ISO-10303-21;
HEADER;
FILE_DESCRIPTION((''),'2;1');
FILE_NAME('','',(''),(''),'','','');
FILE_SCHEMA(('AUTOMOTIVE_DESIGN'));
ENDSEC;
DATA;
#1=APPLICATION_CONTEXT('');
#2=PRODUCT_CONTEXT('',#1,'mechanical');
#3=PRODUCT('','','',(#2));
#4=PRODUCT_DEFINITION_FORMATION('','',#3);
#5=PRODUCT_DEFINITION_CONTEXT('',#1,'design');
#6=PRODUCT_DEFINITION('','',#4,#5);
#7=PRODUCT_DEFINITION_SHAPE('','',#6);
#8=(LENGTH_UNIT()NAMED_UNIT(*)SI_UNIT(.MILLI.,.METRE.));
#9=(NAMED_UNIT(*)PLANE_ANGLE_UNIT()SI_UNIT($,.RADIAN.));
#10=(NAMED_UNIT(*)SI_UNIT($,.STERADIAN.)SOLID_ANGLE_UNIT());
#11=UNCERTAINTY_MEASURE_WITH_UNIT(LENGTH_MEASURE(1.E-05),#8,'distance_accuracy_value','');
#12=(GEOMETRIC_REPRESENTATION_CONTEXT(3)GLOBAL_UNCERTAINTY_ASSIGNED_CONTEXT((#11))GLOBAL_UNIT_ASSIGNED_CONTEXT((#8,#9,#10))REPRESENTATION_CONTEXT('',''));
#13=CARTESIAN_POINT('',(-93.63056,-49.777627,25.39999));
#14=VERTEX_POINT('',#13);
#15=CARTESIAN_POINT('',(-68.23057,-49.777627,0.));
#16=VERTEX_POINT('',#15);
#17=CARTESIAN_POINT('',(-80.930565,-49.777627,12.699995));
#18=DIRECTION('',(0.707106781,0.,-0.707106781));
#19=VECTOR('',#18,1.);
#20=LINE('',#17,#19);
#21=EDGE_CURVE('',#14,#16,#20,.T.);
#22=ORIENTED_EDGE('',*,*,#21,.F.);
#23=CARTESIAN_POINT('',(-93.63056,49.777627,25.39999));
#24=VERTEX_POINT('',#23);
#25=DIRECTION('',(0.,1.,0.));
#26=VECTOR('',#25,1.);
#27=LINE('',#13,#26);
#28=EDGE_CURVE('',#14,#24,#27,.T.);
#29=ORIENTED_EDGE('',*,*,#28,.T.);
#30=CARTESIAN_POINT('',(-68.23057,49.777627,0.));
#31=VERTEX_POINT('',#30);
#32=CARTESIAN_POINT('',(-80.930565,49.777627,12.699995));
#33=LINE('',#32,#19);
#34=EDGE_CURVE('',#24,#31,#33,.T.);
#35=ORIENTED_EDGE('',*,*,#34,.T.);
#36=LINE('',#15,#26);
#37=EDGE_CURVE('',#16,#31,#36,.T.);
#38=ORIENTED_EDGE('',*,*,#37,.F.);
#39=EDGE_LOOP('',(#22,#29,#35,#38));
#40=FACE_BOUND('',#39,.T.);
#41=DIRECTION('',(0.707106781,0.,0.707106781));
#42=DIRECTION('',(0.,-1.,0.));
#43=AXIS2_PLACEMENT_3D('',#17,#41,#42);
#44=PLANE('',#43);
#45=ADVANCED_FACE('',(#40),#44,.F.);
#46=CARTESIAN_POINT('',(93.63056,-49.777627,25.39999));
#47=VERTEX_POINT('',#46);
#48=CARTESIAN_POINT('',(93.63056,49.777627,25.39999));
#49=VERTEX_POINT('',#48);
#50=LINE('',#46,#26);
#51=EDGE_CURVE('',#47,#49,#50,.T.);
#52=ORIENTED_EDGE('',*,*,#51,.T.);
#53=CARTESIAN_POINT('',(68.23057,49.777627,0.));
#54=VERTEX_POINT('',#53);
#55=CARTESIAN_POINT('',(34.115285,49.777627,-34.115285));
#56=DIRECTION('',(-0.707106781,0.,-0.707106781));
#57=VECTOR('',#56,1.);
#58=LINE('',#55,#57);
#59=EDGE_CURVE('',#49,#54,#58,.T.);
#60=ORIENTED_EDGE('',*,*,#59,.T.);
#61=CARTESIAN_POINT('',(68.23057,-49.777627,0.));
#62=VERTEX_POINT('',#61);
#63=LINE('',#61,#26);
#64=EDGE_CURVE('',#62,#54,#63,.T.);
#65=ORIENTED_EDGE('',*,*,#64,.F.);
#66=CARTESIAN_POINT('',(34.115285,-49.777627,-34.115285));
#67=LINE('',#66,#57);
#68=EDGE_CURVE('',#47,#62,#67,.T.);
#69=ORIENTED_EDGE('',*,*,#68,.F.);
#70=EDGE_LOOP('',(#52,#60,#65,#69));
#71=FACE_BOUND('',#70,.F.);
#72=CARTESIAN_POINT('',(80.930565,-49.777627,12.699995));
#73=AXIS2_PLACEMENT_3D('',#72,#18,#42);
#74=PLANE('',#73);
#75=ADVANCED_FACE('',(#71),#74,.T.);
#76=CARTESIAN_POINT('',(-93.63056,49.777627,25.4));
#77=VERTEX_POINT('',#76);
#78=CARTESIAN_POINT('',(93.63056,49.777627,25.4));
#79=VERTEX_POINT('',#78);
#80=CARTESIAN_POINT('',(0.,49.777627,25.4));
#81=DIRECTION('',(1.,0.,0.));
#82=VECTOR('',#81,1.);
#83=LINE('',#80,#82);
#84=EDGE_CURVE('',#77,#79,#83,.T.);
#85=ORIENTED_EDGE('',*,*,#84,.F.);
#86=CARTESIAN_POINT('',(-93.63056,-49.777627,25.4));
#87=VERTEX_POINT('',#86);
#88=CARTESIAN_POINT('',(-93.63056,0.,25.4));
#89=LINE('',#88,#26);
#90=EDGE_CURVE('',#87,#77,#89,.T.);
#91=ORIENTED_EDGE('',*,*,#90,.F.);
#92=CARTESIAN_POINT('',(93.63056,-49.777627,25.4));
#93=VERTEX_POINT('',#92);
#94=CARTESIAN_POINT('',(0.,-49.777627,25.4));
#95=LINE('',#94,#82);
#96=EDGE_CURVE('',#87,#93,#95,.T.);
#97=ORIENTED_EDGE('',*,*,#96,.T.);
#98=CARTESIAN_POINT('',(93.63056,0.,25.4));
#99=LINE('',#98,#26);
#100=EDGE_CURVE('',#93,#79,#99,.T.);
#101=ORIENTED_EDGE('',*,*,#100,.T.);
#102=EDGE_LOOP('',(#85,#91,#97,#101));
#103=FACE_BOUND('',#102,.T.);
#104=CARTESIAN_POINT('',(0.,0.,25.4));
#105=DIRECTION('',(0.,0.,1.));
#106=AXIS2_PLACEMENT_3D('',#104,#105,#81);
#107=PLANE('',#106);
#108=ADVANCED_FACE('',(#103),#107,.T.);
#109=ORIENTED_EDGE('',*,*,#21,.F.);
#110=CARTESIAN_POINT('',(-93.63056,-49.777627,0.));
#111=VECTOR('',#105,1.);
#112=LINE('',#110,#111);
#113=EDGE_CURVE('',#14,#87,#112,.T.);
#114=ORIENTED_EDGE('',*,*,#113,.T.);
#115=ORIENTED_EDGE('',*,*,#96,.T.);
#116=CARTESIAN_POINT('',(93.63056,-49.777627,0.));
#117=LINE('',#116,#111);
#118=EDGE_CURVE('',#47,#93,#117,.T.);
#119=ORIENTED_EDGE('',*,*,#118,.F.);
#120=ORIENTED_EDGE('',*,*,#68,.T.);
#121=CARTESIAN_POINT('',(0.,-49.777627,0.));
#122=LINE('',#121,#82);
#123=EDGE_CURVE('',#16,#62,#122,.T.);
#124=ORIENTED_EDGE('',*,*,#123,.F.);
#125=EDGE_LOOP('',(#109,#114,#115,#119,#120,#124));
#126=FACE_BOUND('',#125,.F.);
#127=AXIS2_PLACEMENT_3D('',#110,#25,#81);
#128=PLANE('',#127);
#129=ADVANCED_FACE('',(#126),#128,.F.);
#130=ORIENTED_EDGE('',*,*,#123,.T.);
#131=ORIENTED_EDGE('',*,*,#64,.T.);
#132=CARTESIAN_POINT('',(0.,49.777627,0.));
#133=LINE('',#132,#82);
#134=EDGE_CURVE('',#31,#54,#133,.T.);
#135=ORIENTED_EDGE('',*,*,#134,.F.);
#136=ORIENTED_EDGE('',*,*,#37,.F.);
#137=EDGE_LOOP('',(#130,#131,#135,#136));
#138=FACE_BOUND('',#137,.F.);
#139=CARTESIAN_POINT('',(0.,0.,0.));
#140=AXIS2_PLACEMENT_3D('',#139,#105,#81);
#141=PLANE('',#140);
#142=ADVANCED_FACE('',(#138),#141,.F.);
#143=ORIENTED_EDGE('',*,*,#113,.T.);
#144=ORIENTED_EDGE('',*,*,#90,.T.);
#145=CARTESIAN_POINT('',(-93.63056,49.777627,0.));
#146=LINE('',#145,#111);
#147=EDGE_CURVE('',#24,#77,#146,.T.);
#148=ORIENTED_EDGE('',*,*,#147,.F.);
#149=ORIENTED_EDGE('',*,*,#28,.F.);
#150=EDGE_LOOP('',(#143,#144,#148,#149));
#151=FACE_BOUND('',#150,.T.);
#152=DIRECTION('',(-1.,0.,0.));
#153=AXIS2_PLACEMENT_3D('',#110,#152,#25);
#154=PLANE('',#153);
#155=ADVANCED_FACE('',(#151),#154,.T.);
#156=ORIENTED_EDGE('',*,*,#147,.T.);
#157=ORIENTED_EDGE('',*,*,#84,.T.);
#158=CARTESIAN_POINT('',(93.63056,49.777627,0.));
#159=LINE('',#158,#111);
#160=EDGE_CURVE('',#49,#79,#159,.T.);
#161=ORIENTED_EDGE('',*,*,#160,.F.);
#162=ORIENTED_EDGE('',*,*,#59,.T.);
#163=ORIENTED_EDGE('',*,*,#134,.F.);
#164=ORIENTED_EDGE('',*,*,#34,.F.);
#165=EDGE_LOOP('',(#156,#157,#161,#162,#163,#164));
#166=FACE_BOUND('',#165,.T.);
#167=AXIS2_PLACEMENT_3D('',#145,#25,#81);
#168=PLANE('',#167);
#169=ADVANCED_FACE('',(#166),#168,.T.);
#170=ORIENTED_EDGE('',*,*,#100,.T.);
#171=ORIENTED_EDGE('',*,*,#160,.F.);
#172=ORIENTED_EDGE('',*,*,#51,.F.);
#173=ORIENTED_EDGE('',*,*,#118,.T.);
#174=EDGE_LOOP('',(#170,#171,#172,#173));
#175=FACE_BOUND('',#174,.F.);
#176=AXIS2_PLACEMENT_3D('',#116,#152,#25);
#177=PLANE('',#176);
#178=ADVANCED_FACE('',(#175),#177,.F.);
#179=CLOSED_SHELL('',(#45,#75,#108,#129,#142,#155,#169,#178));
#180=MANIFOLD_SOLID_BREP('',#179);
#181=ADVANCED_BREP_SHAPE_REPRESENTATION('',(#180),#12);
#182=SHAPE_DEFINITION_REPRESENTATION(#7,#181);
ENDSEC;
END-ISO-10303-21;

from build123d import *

# Parameters (mm, degrees)
F0_W     = 187.2611194849
F0_H     = 99.5552539825
F1_DEPTH = 25.4
F2_SIZE  = 25.39999


# Not quite as in the source:
# - a fillet or chamfer is up to 0.001 mm smaller than in the source, because OpenCascade refuses the exact size


with BuildPart() as f1:
    # F0 (on Top) → F1 (new body)
    with BuildSketch(Plane.XY):
        Rectangle(F0_W, F0_H)
    extrude(amount=F1_DEPTH)

    # F2 (size 25.4 in the source; OpenCascade refuses exactly that, so slightly less here)
    f2_edges = [f1.edges().sort_by_distance(p)[0] for p in [
        (-93.63056, 0, 0),
        (93.63056, 0, 0),
    ]]
    chamfer(f2_edges, length=F2_SIZE)


solid = f1.part
